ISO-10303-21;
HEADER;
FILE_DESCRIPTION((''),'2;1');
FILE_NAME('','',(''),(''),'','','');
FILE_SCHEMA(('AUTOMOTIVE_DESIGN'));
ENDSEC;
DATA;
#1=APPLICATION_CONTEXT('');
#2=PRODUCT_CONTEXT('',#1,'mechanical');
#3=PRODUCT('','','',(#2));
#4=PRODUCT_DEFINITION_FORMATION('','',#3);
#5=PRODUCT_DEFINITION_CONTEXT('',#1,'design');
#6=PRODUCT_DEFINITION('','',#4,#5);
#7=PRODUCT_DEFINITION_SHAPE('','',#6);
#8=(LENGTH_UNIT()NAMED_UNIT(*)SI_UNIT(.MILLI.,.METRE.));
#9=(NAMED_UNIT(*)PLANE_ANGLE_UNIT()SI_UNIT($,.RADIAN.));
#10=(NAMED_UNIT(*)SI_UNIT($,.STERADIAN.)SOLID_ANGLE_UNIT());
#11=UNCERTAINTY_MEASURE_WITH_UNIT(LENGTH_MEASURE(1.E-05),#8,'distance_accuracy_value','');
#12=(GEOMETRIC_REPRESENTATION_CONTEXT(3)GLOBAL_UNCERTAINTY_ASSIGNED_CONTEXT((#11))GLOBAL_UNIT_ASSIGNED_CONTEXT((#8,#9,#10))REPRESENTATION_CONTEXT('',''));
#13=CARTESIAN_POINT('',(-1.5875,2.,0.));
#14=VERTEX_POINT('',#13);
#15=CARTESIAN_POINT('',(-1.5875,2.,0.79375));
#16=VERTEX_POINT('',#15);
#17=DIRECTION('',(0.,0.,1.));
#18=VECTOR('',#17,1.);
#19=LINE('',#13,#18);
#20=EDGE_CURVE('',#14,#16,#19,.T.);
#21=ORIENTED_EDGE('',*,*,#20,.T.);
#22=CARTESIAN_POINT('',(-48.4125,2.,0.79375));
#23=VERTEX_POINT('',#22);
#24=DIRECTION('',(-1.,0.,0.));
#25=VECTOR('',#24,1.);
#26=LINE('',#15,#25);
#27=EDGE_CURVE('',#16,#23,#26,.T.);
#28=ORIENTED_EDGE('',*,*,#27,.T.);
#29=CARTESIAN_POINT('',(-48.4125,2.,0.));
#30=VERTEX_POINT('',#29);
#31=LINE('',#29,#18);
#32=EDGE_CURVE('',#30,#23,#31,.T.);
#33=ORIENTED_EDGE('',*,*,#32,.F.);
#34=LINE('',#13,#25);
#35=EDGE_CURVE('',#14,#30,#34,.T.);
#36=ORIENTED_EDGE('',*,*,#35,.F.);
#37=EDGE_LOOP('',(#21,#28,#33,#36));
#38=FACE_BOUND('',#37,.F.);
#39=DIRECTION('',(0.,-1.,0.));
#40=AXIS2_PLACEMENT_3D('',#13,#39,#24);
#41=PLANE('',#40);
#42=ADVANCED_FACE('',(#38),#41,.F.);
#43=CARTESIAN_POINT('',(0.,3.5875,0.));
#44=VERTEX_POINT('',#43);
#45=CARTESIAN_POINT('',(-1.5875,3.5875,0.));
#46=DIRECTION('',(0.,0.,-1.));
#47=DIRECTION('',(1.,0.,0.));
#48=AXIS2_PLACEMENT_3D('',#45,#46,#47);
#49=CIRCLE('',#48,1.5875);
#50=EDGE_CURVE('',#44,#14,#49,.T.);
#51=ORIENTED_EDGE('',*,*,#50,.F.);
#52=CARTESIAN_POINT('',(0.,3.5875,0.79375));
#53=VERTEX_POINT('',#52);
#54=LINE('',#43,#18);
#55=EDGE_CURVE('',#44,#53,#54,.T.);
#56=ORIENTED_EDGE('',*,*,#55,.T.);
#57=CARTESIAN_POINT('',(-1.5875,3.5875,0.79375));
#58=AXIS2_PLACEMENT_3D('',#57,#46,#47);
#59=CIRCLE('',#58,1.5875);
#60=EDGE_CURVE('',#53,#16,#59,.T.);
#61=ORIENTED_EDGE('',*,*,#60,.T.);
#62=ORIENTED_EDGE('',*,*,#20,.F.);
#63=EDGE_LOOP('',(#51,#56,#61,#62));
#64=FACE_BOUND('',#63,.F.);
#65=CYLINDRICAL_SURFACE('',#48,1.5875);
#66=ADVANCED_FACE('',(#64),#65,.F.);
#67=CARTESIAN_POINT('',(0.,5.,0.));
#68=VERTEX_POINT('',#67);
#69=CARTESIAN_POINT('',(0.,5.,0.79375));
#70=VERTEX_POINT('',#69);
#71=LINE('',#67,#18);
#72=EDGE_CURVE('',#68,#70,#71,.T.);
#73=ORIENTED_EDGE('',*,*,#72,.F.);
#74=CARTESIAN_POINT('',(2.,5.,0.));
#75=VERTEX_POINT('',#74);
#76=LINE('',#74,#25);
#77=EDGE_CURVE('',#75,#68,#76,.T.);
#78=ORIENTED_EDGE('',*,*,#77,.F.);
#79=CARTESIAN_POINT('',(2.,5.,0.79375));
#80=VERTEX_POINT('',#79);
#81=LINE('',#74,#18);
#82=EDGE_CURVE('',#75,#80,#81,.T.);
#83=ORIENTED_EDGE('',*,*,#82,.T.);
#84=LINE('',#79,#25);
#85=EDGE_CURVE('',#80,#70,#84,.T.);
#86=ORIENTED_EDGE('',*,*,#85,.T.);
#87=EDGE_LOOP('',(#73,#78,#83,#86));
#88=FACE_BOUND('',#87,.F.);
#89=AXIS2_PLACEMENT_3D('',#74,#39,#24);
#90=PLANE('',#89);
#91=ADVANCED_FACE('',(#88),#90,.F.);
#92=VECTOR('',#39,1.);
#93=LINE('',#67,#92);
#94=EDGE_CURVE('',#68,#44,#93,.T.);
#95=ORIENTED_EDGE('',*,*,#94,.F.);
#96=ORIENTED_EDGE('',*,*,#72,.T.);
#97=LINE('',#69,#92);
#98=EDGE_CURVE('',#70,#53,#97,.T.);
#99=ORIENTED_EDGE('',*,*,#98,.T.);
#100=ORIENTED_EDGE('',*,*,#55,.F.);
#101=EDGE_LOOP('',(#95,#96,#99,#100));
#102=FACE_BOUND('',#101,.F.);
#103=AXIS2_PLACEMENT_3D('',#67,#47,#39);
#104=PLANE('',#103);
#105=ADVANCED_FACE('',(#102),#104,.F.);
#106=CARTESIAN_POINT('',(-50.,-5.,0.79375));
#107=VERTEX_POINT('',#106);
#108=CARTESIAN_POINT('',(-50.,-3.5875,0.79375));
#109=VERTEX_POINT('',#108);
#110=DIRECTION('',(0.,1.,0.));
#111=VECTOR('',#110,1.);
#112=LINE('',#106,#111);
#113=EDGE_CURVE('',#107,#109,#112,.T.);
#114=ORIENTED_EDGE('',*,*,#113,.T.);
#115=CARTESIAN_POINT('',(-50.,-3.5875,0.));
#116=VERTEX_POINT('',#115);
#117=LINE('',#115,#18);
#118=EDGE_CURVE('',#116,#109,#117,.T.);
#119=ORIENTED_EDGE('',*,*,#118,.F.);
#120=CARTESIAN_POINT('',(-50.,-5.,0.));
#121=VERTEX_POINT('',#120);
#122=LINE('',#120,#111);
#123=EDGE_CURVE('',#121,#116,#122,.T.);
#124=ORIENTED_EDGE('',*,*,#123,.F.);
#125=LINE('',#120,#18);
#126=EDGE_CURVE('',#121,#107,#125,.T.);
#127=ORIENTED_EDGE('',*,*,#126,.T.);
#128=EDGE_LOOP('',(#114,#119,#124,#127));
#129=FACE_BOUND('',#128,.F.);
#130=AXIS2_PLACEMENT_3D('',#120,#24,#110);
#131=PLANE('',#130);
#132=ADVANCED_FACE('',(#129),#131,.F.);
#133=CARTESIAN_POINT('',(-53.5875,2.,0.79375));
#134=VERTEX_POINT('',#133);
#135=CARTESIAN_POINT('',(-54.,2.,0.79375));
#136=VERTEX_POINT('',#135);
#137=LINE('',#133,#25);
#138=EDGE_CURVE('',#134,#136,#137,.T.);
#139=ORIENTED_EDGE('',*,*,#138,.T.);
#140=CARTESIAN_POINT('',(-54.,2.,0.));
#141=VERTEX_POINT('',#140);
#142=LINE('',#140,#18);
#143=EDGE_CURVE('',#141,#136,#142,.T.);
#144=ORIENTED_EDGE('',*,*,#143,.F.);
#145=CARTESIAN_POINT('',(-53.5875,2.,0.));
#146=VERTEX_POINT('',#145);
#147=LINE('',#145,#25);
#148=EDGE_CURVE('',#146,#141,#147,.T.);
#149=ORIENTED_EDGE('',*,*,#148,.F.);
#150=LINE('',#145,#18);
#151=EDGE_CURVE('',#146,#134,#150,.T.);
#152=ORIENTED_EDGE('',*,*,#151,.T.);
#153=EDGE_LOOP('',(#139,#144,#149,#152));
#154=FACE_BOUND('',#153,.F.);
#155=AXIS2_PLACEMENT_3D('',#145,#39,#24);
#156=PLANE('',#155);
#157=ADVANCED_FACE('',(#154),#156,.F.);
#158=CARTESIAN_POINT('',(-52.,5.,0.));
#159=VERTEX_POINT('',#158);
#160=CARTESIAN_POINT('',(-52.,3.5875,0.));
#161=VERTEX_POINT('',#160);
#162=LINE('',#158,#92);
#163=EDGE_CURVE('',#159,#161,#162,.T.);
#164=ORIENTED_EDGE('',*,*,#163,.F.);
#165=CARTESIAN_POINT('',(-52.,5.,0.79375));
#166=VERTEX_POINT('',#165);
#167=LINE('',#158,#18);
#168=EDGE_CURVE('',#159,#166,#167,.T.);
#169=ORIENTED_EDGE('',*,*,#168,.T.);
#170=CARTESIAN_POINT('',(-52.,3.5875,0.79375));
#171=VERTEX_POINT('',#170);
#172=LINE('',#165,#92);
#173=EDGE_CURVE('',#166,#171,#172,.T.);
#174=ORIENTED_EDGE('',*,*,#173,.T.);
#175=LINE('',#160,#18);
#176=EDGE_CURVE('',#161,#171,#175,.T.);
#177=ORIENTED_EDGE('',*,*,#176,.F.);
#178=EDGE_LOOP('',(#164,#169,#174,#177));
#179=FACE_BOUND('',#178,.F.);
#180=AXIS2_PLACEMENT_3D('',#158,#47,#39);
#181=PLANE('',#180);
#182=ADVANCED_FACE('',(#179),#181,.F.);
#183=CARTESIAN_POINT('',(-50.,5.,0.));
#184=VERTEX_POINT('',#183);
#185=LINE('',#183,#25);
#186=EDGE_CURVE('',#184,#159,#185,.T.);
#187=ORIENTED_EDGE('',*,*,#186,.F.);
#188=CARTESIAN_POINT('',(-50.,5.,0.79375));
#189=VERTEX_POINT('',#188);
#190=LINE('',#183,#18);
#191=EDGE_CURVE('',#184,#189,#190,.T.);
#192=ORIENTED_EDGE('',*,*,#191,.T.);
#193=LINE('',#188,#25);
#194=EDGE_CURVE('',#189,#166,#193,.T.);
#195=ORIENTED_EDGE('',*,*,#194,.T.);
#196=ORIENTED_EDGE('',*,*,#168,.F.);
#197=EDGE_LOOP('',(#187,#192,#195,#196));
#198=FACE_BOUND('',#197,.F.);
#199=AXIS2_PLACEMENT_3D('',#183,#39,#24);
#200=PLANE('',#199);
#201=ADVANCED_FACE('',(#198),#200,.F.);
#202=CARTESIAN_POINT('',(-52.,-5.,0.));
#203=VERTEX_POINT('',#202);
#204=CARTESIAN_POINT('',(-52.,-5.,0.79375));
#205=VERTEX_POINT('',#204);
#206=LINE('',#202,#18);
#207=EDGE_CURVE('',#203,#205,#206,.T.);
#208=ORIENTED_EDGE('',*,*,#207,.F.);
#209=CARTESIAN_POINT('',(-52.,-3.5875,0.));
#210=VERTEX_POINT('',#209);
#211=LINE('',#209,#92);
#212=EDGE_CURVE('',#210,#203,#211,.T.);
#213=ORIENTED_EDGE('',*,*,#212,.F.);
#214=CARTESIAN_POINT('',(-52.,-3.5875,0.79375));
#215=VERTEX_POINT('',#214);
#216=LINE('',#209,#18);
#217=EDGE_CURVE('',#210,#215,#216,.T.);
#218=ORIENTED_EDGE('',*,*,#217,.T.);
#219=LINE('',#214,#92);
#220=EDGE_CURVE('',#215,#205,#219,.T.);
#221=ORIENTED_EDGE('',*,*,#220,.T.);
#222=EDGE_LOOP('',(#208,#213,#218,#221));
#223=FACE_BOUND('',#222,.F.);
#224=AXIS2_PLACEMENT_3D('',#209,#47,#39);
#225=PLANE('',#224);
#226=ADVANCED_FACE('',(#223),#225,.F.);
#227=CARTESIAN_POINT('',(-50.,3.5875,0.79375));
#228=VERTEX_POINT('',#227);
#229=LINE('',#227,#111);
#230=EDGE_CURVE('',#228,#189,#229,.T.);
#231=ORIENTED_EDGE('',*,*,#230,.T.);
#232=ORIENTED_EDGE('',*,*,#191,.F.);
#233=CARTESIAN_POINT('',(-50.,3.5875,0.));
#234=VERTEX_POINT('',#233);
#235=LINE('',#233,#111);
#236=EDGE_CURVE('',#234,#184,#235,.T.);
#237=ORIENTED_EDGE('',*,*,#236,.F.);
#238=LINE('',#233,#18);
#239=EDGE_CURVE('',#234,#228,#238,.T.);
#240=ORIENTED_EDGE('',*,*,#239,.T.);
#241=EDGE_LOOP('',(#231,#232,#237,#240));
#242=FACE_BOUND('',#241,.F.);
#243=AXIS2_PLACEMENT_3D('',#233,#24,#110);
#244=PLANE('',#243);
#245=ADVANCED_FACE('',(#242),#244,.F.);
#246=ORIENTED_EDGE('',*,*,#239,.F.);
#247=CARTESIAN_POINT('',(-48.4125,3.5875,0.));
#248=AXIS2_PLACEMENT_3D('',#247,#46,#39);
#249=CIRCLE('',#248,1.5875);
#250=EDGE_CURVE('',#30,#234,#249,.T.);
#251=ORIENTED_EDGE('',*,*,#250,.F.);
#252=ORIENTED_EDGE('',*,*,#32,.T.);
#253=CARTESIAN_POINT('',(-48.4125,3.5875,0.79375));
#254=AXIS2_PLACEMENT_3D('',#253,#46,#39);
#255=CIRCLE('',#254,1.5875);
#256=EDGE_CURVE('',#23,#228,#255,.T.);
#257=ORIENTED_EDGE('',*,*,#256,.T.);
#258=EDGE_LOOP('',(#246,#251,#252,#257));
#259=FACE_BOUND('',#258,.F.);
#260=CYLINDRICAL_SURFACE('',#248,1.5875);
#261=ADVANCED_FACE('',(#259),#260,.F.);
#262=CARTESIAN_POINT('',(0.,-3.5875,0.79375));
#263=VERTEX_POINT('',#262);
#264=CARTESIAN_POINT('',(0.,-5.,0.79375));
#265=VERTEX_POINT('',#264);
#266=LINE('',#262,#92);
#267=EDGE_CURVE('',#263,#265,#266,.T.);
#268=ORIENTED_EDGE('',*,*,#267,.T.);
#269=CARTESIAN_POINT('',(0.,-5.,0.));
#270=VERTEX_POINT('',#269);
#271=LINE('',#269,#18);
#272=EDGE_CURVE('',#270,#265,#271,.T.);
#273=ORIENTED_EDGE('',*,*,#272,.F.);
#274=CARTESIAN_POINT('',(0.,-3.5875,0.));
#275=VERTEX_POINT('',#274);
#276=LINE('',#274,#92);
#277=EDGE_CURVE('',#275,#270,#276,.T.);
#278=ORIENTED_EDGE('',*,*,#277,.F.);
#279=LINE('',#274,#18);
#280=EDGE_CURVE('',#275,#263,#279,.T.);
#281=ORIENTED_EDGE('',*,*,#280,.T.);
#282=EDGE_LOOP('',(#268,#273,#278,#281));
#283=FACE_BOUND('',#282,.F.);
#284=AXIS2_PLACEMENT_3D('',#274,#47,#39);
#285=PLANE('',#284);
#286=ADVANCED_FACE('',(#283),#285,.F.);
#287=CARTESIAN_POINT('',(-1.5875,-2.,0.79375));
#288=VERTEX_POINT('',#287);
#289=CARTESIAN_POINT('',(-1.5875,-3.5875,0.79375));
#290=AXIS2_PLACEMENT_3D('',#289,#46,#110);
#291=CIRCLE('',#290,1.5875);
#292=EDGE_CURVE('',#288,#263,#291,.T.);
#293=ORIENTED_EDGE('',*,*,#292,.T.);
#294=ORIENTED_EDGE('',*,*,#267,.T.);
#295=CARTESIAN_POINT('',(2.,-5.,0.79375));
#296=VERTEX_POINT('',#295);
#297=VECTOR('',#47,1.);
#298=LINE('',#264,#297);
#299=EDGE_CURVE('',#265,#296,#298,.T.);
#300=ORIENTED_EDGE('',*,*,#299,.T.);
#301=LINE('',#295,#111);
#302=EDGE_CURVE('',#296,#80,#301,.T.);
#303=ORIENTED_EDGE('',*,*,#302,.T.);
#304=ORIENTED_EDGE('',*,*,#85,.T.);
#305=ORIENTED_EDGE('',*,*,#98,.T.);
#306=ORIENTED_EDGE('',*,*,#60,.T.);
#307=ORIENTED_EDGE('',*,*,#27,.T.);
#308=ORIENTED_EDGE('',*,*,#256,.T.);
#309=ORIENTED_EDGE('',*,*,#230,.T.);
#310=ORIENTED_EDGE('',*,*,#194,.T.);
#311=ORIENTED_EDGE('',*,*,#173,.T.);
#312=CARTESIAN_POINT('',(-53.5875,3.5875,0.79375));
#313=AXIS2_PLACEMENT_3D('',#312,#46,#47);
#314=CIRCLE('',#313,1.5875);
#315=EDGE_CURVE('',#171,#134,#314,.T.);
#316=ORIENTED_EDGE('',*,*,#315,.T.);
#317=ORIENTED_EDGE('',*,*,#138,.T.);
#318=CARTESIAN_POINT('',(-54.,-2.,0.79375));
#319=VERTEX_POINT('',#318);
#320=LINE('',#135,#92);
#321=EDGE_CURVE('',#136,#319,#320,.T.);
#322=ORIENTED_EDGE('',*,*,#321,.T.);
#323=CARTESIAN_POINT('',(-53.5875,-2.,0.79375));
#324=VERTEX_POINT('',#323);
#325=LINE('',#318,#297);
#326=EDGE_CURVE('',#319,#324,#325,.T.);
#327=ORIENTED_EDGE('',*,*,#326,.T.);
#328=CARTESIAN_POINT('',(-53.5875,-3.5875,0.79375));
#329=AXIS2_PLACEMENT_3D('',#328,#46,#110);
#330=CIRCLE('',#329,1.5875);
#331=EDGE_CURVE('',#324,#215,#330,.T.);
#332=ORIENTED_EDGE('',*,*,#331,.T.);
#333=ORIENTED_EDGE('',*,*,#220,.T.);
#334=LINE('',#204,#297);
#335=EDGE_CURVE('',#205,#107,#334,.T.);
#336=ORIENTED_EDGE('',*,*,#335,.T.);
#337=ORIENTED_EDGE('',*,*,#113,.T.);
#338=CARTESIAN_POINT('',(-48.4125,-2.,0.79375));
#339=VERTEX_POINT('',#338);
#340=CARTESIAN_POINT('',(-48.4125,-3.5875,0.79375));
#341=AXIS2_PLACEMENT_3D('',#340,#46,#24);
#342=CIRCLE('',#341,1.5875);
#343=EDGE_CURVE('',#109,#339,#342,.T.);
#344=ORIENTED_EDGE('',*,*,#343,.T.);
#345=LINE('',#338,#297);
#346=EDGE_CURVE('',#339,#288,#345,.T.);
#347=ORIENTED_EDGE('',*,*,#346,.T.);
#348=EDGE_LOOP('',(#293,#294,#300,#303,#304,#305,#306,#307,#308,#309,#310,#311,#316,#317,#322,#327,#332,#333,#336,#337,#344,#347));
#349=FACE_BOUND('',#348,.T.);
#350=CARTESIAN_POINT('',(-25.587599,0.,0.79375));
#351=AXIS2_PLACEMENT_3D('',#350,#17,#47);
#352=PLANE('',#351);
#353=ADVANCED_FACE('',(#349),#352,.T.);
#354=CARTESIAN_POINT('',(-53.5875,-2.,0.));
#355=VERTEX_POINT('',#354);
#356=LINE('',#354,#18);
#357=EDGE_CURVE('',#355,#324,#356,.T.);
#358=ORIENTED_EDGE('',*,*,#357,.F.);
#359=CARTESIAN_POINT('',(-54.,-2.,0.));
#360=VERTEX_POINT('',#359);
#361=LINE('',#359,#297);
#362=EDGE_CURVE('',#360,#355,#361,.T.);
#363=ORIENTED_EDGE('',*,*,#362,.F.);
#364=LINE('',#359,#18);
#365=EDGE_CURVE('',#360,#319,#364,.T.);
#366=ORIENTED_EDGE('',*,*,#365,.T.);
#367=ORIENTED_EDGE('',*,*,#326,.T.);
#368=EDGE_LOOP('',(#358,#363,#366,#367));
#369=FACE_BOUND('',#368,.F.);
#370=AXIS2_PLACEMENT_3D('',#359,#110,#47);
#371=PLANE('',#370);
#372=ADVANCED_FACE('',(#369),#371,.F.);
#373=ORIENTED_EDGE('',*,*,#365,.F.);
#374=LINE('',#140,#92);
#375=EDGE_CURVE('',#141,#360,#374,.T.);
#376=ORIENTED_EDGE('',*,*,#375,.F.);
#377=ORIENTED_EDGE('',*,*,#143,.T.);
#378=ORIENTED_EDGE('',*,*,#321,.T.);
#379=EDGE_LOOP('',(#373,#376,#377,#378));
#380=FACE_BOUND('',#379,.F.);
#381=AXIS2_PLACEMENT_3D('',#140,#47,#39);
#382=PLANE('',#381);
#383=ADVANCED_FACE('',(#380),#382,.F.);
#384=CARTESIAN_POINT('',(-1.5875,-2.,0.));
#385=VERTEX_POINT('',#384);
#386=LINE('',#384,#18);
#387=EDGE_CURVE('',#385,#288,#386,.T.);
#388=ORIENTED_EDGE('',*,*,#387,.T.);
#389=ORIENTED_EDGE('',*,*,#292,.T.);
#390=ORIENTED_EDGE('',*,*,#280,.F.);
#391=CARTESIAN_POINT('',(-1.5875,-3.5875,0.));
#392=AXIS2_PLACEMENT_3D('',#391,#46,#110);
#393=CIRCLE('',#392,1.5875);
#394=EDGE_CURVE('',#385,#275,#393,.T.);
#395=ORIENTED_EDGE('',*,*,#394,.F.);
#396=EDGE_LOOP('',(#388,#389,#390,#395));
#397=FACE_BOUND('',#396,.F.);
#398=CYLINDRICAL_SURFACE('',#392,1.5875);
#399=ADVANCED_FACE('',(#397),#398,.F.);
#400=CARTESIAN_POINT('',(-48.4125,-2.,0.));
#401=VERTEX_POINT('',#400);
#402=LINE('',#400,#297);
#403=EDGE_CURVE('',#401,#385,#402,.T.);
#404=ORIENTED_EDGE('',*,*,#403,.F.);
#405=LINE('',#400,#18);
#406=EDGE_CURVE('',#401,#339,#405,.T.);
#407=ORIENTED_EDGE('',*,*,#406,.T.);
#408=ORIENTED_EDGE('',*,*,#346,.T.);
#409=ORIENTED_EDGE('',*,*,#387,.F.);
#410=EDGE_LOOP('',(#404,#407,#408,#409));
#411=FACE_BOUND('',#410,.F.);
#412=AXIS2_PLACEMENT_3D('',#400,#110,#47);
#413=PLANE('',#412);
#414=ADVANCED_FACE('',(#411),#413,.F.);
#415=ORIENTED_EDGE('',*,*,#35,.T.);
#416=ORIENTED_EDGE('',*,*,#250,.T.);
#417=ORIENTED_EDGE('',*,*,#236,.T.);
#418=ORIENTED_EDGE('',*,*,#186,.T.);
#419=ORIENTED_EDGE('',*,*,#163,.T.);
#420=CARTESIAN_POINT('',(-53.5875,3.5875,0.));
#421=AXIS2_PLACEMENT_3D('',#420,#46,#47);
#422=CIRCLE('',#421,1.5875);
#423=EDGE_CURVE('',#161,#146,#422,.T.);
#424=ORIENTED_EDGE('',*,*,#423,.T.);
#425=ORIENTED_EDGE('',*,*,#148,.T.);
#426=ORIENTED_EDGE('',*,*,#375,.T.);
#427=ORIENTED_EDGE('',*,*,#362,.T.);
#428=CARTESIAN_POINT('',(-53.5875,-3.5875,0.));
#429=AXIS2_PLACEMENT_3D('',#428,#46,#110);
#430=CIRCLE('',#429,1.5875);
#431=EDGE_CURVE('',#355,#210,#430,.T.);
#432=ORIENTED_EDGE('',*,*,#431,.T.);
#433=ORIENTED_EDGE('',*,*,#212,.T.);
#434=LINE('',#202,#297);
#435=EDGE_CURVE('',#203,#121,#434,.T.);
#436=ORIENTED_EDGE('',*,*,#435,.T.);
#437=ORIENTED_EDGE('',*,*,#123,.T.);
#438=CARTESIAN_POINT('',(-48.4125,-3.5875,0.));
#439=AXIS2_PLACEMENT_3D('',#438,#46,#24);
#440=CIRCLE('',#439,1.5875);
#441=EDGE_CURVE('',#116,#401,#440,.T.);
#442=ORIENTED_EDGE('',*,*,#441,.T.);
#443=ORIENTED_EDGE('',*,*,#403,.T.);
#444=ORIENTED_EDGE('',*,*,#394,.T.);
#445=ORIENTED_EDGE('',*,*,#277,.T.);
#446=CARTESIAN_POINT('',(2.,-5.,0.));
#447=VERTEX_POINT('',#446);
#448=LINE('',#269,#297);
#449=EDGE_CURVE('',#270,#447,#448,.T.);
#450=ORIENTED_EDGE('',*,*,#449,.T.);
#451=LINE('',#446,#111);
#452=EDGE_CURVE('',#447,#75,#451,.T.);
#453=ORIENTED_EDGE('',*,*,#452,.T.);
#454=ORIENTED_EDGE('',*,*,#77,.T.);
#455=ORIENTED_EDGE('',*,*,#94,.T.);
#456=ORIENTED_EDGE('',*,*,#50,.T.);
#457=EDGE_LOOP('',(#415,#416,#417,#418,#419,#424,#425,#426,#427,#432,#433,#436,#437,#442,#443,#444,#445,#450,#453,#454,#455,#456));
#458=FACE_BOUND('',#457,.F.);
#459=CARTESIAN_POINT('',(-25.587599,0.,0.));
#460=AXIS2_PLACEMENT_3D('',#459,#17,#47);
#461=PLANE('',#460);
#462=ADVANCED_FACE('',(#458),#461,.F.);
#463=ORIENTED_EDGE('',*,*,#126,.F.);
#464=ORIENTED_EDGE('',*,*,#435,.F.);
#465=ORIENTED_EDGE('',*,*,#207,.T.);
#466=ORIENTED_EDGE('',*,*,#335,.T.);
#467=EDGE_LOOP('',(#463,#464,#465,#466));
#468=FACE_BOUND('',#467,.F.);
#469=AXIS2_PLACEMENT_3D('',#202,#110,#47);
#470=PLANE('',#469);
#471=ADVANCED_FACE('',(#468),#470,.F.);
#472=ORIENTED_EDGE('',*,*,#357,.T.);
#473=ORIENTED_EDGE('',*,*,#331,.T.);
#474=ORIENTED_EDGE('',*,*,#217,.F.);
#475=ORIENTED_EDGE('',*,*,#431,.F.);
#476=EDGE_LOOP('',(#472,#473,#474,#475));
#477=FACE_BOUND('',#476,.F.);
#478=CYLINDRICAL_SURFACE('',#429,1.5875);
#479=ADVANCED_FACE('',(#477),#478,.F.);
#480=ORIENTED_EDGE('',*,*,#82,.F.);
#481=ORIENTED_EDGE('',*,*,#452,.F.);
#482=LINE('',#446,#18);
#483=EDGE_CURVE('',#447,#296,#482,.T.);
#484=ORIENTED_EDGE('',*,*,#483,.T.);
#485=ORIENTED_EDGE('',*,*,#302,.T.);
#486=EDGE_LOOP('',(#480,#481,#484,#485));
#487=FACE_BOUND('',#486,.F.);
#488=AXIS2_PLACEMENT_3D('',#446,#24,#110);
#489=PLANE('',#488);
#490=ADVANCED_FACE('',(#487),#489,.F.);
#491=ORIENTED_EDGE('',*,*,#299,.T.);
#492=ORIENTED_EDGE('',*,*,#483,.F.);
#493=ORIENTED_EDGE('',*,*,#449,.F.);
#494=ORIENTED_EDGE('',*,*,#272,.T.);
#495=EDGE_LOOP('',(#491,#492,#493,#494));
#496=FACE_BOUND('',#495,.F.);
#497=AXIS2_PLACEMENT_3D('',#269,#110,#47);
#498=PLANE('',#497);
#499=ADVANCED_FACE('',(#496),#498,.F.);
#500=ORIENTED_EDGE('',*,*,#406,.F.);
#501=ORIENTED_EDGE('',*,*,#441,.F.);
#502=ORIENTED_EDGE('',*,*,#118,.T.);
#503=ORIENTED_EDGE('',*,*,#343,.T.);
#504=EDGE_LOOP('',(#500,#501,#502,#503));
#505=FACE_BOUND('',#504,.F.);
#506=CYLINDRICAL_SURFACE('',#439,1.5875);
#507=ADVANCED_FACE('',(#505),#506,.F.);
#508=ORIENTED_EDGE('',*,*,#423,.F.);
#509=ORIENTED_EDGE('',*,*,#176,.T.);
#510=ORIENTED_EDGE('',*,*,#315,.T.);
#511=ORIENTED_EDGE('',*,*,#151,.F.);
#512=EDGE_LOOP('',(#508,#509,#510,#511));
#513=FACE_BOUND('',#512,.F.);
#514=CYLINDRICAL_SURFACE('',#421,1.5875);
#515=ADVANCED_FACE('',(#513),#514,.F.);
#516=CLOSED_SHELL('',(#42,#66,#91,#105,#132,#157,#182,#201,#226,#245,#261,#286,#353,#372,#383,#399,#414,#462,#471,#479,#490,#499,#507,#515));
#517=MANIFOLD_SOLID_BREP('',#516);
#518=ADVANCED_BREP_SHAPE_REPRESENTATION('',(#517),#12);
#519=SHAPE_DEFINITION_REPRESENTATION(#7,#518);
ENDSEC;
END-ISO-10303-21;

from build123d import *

# Parameters (mm, degrees)
F1_DEPTH = 0.79375


# Not quite as in the source:
# - a length typed as a fraction of an inch, garbled in the dataset ("3 / 203.2 mm" for 3/8 in), is restored


with BuildPart() as f1:
    # F0 (on Top) → F1 (new body)
    with BuildSketch(Plane.XY):
        with BuildLine():
            ThreePointArc((0, 3.5875), (-0.4649679849, 2.4649679849), (-1.5875, 2))
            Line((-1.5875, 2), (-48.4125, 2))
            ThreePointArc((-48.4125, 2), (-49.5350320151, 2.4649679849), (-50, 3.5875))
            Line((-50, 3.5875), (-50, 5))
            Line((-50, 5), (-52, 5))
            Line((-52, 5), (-52, 3.5875))
            ThreePointArc((-52, 3.5875), (-52.4649679849, 2.4649679849), (-53.5875, 2))
            Line((-53.5875, 2), (-54, 2))
            Line((-54, 2), (-54, -2))
            Line((-54, -2), (-53.5875, -2))
            ThreePointArc((-53.5875, -2), (-52.4649679849, -2.4649679849), (-52, -3.5875))
            Line((-52, -3.5875), (-52, -5))
            Line((-52, -5), (-50, -5))
            Line((-50, -5), (-50, -3.5875))
            ThreePointArc((-50, -3.5875), (-49.5350320151, -2.4649679849), (-48.4125, -2))
            Line((-48.4125, -2), (-1.5875, -2))
            ThreePointArc((-1.5875, -2), (-0.4649679849, -2.4649679849), (0, -3.5875))
            Line((0, -3.5875), (0, -5))
            Line((0, -5), (2, -5))
            Line((2, -5), (2, 5))
            Line((2, 5), (0, 5))
            Line((0, 5), (0, 3.5875))
        make_face()
    extrude(amount=F1_DEPTH)


solid = f1.part
